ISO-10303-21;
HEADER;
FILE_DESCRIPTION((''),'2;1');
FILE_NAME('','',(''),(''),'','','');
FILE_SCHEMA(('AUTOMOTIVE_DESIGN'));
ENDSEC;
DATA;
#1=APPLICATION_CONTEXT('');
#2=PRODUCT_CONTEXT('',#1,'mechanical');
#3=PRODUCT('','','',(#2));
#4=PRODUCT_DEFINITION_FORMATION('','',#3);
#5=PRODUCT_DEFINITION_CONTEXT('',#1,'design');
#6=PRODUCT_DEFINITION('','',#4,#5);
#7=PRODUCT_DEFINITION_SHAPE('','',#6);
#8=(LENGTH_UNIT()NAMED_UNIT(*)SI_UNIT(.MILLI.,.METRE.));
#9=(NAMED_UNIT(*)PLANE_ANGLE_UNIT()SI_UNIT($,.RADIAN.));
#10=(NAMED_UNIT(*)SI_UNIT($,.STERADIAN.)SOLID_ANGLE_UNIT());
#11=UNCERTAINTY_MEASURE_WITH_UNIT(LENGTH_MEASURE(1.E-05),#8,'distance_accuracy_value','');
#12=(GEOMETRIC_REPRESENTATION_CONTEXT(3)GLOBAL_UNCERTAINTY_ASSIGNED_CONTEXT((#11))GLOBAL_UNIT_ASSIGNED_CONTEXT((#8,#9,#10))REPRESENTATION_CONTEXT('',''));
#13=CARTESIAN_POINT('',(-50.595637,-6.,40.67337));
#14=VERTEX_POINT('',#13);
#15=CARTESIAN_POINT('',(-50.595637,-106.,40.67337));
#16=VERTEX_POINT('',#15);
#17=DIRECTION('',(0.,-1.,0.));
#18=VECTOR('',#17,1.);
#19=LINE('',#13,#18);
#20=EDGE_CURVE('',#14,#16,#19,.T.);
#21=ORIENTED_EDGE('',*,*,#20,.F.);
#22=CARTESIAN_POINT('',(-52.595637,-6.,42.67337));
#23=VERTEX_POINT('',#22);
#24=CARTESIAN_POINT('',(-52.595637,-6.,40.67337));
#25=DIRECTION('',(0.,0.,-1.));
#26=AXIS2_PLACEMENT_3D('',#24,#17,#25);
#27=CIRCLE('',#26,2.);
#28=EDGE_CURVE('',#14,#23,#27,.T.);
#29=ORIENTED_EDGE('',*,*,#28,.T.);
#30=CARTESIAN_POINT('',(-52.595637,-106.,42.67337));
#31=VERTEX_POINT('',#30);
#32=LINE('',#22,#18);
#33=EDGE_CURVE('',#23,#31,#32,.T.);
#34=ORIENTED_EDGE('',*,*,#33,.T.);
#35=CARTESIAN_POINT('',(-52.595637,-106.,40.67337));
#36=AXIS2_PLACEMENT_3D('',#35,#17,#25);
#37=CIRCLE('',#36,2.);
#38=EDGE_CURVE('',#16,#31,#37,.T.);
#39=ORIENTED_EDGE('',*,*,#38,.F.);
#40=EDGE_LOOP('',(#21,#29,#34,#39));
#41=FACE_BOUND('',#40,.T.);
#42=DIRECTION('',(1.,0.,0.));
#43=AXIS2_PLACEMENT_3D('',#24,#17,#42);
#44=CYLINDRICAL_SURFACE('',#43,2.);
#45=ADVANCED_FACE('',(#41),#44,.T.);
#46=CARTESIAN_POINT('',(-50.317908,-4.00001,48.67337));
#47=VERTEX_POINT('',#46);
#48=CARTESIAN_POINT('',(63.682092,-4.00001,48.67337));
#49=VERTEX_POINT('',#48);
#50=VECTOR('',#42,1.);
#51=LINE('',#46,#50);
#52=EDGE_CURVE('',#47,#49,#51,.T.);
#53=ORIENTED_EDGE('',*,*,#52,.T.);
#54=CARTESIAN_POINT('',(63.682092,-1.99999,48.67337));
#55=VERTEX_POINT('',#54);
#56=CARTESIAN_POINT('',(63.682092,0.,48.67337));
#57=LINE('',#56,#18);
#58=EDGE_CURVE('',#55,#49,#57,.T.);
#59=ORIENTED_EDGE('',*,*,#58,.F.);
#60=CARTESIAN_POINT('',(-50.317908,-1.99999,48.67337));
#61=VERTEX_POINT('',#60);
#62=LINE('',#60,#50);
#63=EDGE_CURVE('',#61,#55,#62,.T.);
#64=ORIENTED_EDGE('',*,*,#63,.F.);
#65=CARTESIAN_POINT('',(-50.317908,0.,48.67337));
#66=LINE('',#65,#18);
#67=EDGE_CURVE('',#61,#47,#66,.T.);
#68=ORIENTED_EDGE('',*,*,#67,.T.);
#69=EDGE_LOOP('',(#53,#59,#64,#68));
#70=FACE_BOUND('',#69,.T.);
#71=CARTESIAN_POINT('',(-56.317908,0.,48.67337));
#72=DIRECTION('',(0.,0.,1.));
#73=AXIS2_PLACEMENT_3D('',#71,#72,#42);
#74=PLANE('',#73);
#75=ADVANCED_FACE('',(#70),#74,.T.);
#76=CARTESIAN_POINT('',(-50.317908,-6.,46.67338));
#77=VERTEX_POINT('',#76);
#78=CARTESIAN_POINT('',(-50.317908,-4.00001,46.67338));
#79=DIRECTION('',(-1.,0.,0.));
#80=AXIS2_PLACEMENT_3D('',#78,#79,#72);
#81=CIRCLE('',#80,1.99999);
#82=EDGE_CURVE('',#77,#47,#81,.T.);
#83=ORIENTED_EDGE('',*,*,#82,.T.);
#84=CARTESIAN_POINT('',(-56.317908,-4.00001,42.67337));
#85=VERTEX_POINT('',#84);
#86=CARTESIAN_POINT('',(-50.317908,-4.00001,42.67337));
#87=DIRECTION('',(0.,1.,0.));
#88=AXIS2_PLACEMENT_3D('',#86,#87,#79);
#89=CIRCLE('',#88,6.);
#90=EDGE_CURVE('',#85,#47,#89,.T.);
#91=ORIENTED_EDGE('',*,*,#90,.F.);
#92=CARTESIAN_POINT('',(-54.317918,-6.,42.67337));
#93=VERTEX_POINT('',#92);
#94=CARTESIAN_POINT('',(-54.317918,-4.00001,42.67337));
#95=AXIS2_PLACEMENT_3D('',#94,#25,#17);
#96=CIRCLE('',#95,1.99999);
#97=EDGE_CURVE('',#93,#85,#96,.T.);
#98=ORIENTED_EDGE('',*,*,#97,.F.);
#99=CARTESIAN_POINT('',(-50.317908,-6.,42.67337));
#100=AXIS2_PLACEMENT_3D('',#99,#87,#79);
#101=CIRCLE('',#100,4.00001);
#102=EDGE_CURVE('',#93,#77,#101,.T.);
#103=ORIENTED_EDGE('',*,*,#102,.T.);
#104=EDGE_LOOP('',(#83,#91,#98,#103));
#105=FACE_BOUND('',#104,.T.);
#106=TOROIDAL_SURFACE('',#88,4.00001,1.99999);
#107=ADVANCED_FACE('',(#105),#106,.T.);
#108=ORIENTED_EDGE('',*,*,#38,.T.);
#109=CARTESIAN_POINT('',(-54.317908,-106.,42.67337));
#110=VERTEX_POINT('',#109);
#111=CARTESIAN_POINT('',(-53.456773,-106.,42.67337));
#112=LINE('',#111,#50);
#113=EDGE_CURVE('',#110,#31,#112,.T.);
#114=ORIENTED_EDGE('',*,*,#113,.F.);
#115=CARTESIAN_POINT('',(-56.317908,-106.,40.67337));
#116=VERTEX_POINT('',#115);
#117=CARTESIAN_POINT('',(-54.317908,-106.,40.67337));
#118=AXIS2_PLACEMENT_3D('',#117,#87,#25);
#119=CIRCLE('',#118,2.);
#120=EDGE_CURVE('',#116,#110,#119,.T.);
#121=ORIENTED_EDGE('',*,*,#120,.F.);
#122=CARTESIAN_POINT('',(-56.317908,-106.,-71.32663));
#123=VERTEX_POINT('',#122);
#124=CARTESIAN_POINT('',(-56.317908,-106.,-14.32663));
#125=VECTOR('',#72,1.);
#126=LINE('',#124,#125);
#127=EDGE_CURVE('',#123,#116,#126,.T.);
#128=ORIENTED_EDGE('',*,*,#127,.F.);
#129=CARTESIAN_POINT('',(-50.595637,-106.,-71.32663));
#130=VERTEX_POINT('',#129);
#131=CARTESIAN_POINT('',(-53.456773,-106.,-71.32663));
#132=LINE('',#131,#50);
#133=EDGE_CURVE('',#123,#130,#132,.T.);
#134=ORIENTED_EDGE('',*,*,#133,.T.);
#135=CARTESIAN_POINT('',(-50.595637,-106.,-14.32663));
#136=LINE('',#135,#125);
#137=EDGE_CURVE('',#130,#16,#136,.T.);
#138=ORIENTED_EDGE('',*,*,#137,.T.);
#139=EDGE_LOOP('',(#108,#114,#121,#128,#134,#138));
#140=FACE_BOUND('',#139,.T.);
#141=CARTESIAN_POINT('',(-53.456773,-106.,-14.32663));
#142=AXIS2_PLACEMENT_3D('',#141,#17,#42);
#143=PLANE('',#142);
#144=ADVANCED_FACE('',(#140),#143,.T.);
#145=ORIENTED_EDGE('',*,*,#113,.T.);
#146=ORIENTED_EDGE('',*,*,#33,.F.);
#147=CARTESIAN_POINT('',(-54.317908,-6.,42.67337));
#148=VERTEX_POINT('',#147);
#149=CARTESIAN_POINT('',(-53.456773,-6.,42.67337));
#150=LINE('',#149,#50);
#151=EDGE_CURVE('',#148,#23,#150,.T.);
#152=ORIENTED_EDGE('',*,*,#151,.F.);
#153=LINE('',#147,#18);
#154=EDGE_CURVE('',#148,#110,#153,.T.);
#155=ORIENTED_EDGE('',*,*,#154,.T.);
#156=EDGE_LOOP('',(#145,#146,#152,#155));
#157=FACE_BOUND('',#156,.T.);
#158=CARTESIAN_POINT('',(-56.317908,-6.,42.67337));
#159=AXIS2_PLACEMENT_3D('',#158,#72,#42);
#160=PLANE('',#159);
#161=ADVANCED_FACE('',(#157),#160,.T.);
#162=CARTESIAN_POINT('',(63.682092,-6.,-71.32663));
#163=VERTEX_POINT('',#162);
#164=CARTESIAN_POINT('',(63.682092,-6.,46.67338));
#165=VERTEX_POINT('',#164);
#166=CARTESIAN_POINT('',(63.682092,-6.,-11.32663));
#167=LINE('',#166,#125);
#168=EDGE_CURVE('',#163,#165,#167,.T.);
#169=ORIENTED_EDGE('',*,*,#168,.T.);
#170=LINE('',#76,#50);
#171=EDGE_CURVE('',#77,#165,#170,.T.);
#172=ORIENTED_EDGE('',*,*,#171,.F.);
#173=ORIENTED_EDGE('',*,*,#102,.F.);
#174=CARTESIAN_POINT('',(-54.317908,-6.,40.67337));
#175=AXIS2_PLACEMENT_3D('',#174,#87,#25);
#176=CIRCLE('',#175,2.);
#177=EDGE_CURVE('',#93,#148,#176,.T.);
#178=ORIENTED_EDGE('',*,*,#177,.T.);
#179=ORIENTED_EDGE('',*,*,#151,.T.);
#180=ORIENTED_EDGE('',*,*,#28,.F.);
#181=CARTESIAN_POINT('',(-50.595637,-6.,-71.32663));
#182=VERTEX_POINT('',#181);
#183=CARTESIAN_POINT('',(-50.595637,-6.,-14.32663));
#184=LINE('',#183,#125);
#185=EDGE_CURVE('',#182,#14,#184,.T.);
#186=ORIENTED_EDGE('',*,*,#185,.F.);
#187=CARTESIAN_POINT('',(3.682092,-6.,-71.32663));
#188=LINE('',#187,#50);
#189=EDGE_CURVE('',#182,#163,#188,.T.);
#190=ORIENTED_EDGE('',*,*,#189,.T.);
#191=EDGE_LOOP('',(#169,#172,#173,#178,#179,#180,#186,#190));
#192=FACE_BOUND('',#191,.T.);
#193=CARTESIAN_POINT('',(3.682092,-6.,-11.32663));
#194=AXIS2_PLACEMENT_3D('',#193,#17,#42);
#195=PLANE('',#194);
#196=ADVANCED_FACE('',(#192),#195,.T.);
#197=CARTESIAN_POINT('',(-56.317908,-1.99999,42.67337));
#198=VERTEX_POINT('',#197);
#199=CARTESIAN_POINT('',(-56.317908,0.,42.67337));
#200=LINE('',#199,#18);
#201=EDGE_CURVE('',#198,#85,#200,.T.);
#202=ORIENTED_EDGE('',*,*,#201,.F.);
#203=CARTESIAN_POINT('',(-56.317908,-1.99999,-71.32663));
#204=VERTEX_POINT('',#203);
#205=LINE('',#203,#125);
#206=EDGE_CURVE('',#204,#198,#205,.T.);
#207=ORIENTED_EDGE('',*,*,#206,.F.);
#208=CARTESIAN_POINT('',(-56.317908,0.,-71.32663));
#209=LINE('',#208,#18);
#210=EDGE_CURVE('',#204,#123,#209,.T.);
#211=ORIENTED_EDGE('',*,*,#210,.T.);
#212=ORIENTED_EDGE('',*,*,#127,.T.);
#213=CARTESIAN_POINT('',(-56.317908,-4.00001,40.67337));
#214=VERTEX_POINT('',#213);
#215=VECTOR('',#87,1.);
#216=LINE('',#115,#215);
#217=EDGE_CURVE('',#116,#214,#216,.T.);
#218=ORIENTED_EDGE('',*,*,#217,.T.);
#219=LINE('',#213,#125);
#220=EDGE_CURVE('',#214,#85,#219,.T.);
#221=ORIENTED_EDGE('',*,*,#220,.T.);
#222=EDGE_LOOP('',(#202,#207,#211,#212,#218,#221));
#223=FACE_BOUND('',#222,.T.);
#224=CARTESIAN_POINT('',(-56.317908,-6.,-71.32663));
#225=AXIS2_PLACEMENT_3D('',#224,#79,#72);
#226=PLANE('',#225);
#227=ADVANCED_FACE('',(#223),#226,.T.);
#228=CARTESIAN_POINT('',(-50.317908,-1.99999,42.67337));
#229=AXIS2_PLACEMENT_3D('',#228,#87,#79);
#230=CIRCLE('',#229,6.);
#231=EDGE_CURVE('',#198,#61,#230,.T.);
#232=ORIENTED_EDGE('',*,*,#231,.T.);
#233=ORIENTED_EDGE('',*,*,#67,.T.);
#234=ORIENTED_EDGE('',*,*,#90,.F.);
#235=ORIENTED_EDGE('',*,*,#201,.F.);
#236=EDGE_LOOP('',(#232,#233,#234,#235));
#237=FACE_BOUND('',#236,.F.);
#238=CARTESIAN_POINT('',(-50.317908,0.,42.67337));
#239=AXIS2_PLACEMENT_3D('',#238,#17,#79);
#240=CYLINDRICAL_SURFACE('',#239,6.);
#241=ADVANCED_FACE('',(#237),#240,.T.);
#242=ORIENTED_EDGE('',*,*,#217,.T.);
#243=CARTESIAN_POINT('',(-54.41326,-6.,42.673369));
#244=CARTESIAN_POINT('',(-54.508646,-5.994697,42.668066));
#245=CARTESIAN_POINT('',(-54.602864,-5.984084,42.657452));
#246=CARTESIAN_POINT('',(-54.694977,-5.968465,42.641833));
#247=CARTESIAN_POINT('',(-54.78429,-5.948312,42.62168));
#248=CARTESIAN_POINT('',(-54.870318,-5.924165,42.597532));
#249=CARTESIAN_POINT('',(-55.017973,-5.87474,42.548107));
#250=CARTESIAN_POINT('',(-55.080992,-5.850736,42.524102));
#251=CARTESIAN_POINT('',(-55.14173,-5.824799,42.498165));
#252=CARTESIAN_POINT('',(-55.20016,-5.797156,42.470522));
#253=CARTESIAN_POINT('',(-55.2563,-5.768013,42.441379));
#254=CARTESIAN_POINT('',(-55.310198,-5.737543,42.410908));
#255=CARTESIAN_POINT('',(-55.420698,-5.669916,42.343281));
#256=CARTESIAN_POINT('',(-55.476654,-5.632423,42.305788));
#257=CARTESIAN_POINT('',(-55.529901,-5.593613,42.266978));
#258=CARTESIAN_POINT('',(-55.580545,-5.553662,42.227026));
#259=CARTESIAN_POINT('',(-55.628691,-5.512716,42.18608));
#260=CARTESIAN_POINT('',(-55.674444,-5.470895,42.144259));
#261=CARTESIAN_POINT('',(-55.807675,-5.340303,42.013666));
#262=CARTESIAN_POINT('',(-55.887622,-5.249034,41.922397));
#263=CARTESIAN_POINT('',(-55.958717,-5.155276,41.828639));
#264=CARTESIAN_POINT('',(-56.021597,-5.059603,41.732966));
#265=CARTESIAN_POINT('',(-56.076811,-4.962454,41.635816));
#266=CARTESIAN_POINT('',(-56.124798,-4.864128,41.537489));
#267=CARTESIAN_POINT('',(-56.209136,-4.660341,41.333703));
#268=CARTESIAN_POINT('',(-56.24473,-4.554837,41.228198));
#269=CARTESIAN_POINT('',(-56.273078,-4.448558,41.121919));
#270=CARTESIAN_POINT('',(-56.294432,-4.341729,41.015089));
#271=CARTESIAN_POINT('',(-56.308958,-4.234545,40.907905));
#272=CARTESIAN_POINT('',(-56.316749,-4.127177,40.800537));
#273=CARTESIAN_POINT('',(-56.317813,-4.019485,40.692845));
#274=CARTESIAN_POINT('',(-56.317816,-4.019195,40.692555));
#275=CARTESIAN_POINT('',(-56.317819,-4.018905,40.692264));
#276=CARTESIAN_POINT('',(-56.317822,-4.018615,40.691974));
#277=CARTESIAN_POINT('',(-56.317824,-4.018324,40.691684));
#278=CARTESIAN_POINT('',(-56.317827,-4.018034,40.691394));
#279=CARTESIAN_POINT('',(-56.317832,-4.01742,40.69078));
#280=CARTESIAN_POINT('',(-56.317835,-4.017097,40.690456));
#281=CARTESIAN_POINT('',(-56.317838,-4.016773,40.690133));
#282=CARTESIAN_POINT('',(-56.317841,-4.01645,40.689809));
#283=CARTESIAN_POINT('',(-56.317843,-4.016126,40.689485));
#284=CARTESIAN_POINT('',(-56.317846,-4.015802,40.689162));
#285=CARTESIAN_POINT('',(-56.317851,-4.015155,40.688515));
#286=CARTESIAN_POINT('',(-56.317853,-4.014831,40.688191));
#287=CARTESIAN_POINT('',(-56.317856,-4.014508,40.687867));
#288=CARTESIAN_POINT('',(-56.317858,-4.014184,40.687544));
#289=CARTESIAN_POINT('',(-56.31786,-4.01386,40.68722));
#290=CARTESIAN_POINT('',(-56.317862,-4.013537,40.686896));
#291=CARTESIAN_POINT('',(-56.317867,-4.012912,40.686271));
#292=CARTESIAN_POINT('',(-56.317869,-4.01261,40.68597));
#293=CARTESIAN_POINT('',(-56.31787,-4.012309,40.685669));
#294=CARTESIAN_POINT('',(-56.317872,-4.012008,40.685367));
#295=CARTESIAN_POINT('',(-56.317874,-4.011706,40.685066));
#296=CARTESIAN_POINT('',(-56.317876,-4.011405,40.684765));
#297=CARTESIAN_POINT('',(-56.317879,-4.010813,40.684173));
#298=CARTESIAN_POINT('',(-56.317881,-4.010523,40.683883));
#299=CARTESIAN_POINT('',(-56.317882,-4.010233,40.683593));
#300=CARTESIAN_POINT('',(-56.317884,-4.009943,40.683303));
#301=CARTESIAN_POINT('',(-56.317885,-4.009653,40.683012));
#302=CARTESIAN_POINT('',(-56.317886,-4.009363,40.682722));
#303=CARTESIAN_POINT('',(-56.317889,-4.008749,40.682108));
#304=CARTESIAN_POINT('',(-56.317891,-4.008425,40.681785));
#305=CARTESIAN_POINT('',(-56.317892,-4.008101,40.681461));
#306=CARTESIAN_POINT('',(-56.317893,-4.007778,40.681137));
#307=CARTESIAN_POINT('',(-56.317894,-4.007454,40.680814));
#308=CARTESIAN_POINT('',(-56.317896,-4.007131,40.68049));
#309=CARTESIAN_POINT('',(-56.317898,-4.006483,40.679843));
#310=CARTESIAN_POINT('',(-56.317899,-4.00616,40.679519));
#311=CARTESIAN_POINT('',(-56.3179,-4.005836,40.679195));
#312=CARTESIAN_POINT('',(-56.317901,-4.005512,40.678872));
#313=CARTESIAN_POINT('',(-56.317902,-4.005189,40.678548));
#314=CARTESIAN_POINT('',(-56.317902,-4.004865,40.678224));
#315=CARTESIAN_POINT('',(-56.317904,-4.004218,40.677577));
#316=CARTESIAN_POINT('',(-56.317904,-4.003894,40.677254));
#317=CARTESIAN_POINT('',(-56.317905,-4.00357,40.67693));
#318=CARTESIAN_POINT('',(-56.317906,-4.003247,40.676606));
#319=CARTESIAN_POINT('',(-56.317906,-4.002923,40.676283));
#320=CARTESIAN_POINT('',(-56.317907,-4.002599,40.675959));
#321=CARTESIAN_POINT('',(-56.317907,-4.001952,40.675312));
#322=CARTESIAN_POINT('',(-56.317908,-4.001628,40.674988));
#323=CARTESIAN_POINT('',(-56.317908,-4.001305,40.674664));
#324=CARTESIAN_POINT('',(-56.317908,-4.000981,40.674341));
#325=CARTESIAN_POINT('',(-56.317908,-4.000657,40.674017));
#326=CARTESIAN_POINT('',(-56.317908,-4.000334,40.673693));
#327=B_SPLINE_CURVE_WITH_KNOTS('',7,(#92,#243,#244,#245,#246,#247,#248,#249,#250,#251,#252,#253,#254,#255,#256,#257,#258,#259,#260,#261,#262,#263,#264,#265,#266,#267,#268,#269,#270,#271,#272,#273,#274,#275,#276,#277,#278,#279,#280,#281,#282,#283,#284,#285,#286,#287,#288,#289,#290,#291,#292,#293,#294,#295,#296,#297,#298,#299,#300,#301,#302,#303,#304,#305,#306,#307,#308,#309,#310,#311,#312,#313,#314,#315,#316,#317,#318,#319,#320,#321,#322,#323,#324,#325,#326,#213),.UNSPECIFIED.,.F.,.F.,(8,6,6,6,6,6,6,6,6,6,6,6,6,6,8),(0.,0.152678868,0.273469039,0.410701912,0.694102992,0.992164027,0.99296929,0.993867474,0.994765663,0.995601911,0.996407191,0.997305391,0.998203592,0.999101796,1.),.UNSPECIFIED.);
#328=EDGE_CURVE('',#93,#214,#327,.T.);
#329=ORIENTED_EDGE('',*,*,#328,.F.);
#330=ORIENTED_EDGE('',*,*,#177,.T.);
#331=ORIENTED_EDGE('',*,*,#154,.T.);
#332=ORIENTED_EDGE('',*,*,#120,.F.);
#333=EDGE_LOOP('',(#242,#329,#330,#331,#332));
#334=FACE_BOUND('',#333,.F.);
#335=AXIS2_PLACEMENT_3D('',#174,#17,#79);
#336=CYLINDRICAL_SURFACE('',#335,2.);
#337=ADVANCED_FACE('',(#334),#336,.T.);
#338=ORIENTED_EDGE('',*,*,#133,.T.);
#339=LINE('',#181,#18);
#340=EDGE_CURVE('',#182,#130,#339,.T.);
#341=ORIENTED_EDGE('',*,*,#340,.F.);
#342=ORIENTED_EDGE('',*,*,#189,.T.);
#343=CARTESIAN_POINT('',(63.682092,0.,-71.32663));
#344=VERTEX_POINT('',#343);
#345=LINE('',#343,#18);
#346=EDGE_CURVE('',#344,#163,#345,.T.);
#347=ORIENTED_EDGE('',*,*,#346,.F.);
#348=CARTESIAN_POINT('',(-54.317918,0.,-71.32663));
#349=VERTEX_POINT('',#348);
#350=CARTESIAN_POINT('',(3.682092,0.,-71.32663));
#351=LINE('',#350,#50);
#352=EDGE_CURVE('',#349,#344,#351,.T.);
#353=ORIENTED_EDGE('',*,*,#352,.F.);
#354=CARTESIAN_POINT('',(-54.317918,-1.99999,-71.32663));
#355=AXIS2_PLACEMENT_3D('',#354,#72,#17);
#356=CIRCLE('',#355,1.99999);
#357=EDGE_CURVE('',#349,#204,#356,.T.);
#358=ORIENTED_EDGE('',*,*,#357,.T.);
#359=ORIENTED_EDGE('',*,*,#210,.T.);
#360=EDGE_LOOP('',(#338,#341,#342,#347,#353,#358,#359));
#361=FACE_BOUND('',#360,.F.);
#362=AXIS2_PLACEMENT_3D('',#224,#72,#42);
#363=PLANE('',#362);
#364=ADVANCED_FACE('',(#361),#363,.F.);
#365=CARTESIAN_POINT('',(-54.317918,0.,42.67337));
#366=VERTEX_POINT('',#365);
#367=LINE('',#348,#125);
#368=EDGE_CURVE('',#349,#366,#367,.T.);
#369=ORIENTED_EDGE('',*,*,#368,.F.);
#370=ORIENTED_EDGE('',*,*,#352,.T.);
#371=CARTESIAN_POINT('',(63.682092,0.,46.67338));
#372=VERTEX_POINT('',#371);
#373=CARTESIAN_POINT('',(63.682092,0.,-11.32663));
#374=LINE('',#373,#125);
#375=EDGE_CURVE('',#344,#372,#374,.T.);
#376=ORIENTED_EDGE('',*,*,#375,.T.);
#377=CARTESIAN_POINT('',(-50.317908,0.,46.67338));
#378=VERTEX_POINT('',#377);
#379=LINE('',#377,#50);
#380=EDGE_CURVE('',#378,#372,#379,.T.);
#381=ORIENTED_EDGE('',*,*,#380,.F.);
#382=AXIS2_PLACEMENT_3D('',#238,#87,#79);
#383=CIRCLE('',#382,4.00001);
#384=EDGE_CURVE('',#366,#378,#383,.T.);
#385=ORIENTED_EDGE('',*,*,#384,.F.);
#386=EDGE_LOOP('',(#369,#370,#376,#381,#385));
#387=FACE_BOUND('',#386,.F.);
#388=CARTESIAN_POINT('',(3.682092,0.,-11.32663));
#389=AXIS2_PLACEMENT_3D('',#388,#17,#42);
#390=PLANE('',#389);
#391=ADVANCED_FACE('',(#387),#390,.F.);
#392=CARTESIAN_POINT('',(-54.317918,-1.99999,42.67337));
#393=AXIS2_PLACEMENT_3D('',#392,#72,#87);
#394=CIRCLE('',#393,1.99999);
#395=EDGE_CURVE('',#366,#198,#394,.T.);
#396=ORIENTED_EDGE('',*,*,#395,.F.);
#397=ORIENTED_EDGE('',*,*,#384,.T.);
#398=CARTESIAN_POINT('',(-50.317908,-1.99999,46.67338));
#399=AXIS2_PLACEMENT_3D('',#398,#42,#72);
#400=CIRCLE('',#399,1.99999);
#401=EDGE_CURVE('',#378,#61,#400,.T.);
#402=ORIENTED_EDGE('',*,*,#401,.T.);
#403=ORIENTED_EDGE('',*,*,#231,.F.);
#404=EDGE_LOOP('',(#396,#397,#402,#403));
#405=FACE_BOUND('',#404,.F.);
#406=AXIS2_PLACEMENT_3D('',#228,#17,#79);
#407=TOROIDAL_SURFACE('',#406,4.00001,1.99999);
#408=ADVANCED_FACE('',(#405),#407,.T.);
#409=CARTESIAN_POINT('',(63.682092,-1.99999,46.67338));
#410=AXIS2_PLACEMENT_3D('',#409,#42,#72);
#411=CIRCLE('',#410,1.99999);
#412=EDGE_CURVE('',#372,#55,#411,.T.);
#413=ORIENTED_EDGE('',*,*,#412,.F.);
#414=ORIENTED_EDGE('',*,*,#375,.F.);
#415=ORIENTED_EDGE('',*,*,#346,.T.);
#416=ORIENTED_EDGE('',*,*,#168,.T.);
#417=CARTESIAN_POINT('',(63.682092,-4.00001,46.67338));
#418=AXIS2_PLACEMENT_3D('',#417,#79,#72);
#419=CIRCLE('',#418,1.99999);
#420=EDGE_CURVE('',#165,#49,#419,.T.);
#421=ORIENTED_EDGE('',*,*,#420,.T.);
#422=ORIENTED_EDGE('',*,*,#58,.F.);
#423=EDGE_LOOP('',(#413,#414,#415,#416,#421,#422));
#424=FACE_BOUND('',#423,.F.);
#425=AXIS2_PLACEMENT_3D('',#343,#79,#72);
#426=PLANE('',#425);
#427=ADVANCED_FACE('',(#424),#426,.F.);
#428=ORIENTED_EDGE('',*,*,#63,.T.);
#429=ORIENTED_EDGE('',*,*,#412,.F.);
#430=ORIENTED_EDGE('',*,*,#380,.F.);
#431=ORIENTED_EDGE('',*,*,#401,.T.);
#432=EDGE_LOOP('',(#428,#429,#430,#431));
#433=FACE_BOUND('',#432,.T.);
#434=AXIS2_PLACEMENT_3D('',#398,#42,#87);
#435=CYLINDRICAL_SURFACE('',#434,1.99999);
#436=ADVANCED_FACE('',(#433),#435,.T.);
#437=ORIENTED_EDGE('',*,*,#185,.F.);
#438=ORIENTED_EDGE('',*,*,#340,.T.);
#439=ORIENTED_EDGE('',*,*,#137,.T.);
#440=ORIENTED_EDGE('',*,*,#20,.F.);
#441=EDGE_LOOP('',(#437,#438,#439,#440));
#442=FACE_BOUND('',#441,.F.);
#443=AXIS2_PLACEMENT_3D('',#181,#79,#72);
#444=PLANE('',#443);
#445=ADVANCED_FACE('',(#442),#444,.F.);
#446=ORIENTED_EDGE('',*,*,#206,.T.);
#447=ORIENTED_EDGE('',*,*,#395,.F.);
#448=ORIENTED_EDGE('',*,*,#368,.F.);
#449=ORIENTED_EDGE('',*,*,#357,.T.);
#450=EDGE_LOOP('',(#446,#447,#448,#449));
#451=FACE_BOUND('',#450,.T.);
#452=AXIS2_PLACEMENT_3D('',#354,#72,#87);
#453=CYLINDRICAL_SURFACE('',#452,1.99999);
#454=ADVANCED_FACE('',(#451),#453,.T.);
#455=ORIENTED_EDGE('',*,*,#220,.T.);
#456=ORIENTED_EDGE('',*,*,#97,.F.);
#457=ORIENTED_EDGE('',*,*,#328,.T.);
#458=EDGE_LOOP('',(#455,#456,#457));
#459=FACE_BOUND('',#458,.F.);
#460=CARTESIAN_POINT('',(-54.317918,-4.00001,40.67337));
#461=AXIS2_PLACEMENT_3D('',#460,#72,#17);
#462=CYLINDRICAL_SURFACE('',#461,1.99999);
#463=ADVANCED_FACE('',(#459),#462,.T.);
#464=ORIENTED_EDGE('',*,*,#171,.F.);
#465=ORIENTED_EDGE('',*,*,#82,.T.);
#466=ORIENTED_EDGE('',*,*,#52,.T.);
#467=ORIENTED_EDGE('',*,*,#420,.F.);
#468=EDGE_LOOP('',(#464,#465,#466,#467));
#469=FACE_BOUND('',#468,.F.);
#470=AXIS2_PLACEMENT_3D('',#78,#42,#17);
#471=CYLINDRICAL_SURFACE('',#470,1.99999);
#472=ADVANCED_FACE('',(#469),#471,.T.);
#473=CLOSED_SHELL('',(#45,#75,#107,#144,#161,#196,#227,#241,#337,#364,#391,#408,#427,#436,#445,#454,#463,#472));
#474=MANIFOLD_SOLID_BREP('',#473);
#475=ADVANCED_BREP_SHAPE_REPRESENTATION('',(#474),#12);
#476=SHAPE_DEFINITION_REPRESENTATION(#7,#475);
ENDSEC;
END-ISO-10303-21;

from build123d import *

# Parameters (mm, degrees)
F0_W     = 120
F0_H     = 120
F1_DEPTH = 6
F2_R     = 6
F3_W     = 5.722270757
F3_H     = 114
F4_DEPTH = 100
F5_R     = 2
F6_R     = 1.99999


# Not quite as in the source:
# - a fillet or chamfer is up to 0.001 mm smaller than in the source, because OpenCascade refuses the exact size


with BuildPart() as f1:
    # F0 (on Front) → F1 (new body)
    with BuildSketch(Plane.XZ):
        with Locations((3.6820918322, -11.3266304067)):
            Rectangle(F0_W, F0_H)
    extrude(amount=F1_DEPTH)

    # F2
    f2_edges = [f1.edges().sort_by_distance(p)[0] for p in [
        (-56.317908, -3, 48.67337),
    ]]
    fillet(f2_edges, radius=F2_R)

    # F3 (on face) → F4 (join)
    with BuildSketch(Plane.XZ.offset(6)):
        with Locations((-53.4567727894, -14.3266304067)):
            Rectangle(F3_W, F3_H)
    extrude(amount=F4_DEPTH)

    # F5
    f5_edges = [f1.edges().sort_by_distance(p)[0] for p in [
        (-56.317908, -56, 42.67337),
        (-50.595637, -56, 42.67337),
    ]]
    fillet(f5_edges, radius=F5_R)

    # F6 (radius 2 in the source; OpenCascade refuses exactly that, so slightly less here)
    f6_edges = [f1.edges().sort_by_distance(p)[0] for p in [
        (6.682092, -6, 48.67337),
        (6.682092, 0, 48.67337),
    ]]
    fillet(f6_edges, radius=F6_R)


solid = f1.part
